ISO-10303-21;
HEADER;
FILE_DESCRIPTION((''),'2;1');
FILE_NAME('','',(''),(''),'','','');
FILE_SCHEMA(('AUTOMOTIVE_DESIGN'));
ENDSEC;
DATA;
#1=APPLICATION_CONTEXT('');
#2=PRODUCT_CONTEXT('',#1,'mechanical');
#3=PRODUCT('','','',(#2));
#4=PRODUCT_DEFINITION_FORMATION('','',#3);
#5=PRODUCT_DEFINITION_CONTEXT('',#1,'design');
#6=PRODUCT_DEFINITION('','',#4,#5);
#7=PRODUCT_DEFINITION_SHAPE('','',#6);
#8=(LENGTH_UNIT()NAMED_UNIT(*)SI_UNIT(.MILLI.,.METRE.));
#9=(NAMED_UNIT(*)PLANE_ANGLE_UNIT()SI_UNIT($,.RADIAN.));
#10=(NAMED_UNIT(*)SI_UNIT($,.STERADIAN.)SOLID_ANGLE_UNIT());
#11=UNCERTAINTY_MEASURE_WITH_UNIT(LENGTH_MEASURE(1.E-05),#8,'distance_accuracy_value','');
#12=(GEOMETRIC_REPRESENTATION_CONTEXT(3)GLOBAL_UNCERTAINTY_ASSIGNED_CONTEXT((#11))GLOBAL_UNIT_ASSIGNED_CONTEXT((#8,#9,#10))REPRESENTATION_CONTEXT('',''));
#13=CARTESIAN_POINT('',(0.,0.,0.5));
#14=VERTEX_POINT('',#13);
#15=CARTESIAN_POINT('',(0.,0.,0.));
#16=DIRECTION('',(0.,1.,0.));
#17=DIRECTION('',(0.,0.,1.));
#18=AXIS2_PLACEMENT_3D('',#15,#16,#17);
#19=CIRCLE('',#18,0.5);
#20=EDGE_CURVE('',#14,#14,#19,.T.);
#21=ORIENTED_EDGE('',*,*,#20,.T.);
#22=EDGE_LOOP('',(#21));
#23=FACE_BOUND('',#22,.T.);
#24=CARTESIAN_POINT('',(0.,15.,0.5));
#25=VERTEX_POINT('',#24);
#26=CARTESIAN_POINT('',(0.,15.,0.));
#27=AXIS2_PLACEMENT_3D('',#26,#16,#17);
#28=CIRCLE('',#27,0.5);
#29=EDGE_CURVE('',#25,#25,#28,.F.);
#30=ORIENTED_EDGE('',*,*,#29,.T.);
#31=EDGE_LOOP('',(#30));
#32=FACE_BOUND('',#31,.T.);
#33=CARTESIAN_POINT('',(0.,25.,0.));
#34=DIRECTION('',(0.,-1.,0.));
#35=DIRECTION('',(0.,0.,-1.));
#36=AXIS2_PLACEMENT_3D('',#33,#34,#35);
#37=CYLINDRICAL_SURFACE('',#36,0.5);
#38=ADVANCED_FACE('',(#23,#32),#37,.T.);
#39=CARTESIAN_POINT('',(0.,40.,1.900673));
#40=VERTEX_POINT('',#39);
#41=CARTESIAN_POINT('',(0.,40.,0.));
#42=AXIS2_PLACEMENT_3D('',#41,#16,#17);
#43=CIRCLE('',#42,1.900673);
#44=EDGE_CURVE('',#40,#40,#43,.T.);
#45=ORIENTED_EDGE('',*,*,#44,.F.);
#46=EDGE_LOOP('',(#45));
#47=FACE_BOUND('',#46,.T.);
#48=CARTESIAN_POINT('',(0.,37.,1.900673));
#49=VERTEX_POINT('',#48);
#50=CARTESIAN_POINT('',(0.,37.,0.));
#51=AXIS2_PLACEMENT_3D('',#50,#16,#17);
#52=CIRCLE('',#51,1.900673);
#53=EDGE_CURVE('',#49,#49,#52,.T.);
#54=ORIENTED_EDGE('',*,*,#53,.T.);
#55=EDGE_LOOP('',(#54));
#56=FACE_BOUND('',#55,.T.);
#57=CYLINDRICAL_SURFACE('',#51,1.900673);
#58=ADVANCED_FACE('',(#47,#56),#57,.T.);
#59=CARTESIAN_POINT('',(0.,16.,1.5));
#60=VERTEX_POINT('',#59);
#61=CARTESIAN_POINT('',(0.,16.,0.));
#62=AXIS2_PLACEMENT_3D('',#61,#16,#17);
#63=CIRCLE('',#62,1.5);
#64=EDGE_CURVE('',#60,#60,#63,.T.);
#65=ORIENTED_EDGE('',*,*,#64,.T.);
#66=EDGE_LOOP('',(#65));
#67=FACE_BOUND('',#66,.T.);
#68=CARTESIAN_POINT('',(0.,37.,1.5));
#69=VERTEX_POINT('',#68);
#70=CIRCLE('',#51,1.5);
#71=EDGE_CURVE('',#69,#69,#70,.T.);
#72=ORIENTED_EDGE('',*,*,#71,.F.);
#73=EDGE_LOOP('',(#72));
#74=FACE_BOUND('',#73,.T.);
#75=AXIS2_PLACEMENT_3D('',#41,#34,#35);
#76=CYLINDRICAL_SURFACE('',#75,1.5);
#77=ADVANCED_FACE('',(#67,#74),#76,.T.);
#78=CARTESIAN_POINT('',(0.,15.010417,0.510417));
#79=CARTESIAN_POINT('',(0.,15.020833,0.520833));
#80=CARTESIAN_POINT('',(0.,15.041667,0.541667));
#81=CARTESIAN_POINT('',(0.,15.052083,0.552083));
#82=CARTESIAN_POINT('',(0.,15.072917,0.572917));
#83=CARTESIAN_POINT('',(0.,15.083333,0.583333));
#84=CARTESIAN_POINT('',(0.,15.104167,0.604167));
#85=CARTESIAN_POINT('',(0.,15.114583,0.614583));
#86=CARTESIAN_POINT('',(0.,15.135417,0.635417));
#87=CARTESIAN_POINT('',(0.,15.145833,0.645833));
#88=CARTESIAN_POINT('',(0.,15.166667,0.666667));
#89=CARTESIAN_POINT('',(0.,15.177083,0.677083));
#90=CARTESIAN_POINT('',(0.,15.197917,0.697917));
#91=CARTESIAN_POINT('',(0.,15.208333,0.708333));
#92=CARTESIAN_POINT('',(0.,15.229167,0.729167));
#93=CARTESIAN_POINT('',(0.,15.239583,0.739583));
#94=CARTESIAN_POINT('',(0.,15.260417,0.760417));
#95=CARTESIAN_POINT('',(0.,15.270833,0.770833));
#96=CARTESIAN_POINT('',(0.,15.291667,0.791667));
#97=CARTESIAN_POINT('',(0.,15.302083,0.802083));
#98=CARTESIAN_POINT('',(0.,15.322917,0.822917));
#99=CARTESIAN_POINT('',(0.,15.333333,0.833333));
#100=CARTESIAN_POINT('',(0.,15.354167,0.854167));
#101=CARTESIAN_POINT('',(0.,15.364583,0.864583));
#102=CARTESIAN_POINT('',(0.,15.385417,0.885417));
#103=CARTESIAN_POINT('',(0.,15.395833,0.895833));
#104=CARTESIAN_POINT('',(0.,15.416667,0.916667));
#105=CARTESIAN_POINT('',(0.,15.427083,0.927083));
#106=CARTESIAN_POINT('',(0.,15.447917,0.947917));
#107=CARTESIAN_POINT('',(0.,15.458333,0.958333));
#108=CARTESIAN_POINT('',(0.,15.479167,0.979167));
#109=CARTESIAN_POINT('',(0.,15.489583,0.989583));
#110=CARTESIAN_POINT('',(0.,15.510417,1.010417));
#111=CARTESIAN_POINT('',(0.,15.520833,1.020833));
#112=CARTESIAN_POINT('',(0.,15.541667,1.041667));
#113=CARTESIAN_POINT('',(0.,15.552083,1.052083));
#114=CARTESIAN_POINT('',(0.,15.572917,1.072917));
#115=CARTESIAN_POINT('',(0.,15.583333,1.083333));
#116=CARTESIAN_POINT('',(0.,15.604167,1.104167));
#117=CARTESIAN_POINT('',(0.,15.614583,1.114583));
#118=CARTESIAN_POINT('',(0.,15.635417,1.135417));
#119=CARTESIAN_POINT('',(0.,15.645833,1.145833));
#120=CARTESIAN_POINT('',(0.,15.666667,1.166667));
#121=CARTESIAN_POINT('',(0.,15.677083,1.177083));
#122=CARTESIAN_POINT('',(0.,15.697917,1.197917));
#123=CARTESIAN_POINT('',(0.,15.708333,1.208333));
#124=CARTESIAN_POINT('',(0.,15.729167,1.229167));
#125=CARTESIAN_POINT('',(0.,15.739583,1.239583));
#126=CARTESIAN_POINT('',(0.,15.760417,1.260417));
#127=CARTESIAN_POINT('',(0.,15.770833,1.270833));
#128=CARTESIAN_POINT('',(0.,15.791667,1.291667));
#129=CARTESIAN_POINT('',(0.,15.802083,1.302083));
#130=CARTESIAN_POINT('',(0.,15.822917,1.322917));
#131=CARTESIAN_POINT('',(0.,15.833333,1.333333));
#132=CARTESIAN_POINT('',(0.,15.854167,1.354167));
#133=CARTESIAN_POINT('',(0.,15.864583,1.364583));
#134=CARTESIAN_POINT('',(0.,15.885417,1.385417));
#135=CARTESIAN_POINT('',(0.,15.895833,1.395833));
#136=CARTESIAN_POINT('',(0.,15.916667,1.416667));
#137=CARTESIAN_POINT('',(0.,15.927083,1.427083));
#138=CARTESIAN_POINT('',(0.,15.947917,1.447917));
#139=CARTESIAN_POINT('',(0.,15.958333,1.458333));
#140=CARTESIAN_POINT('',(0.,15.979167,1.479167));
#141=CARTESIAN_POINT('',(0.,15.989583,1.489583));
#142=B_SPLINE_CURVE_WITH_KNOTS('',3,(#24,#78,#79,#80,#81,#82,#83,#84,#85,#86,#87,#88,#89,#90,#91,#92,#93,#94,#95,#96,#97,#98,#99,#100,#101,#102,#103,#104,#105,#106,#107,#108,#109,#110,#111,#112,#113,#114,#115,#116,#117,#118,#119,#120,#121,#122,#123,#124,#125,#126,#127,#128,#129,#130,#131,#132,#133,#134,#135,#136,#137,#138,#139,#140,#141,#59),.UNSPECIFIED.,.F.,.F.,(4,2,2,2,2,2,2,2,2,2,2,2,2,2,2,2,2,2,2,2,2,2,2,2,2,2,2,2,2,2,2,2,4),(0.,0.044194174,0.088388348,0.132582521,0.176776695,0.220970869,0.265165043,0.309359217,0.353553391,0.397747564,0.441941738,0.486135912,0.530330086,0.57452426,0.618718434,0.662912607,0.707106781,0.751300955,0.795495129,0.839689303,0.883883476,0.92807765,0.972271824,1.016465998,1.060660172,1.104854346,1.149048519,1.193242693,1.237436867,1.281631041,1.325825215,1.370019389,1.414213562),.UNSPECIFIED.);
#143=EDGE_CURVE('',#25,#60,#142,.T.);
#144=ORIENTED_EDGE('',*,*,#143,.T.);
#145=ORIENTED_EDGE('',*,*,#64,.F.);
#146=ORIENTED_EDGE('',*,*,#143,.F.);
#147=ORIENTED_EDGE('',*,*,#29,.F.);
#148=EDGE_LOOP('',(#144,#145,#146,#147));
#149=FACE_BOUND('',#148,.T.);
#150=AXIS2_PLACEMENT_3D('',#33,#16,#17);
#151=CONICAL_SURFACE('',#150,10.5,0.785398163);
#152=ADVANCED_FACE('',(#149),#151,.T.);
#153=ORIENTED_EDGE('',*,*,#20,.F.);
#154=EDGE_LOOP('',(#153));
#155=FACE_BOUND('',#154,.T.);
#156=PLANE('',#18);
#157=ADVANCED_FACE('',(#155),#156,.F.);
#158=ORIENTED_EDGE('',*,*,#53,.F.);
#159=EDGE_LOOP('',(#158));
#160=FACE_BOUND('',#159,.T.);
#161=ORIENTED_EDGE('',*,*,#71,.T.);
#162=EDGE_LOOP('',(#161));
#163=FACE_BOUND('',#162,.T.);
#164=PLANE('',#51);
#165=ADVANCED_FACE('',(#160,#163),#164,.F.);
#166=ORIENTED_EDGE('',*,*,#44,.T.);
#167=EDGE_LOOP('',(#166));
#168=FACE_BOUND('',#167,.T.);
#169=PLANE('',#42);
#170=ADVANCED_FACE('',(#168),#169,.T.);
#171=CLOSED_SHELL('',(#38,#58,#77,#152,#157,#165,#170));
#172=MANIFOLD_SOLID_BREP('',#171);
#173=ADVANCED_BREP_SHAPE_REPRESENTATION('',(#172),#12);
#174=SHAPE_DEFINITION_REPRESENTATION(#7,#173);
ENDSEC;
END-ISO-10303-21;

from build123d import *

# Parameters (mm, degrees)
SKETCH3_R           = 0.5
BOSS_EXTRUDE4_DEPTH = 25
SKETCH5_R           = 1.5
BOSS_EXTRUDE5_DEPTH = 15
CHAMFER2_SIZE       = 10
SKETCH6_R           = 1.900672983
BOSS_EXTRUDE6_DEPTH = 3


with BuildPart() as part:
    # Sketch3 → Boss-Extrude4 (new body)
    with BuildSketch(Plane(origin=(0, 0, 0), x_dir=(1, 0, 0), z_dir=(0, 1, 0))):
        with Locations(Location((0, 0, 0), (0, 0, 270))):
            Circle(SKETCH3_R)
    extrude(amount=BOSS_EXTRUDE4_DEPTH)

    # Sketch5 → Boss-Extrude5 (add)
    with BuildSketch(Plane(origin=(0, 25, 0), x_dir=(1, 0, 0), z_dir=(0, 1, 0))):
        with Locations(Location((0, 0, 0), (0, 0, 270))):
            Circle(SKETCH5_R)
    extrude(amount=BOSS_EXTRUDE5_DEPTH)

    # Chamfer2
    # the kernel refuses this chamfer: 10 mm, written as the material it adds along each edge
    with BuildSketch(Plane(origin=(0, 25, 0), x_dir=(0, 0, 1), z_dir=(-1, 0, 0))) as chamfer2_piece_1_section:
        Polygon((0.5 + CHAMFER2_SIZE, 0), (0.5, -CHAMFER2_SIZE), (0.5, 0), align=None)
    chamfer2_piece_1 = revolve(axis=Axis((0, 25, 0), (0, 1, 0)), mode=Mode.PRIVATE)
    chamfer2_piece_1 = chamfer2_piece_1 & Plane(origin=(0, 15.387158422, 0), x_dir=(0, 0, 1), z_dir=(0, -1, 0)) * Cylinder(1.5, 42, mode=Mode.PRIVATE)
    add(chamfer2_piece_1)

    # Sketch6 → Boss-Extrude6 (add)
    with BuildSketch(Plane(origin=(0, 40, 0), x_dir=(1, 0, 0), z_dir=(0, 1, 0))):
        with Locations(Location((0, 0, 0), (0, 0, 270))):
            Circle(SKETCH6_R)
    extrude(amount=-BOSS_EXTRUDE6_DEPTH)


solid = part.part
